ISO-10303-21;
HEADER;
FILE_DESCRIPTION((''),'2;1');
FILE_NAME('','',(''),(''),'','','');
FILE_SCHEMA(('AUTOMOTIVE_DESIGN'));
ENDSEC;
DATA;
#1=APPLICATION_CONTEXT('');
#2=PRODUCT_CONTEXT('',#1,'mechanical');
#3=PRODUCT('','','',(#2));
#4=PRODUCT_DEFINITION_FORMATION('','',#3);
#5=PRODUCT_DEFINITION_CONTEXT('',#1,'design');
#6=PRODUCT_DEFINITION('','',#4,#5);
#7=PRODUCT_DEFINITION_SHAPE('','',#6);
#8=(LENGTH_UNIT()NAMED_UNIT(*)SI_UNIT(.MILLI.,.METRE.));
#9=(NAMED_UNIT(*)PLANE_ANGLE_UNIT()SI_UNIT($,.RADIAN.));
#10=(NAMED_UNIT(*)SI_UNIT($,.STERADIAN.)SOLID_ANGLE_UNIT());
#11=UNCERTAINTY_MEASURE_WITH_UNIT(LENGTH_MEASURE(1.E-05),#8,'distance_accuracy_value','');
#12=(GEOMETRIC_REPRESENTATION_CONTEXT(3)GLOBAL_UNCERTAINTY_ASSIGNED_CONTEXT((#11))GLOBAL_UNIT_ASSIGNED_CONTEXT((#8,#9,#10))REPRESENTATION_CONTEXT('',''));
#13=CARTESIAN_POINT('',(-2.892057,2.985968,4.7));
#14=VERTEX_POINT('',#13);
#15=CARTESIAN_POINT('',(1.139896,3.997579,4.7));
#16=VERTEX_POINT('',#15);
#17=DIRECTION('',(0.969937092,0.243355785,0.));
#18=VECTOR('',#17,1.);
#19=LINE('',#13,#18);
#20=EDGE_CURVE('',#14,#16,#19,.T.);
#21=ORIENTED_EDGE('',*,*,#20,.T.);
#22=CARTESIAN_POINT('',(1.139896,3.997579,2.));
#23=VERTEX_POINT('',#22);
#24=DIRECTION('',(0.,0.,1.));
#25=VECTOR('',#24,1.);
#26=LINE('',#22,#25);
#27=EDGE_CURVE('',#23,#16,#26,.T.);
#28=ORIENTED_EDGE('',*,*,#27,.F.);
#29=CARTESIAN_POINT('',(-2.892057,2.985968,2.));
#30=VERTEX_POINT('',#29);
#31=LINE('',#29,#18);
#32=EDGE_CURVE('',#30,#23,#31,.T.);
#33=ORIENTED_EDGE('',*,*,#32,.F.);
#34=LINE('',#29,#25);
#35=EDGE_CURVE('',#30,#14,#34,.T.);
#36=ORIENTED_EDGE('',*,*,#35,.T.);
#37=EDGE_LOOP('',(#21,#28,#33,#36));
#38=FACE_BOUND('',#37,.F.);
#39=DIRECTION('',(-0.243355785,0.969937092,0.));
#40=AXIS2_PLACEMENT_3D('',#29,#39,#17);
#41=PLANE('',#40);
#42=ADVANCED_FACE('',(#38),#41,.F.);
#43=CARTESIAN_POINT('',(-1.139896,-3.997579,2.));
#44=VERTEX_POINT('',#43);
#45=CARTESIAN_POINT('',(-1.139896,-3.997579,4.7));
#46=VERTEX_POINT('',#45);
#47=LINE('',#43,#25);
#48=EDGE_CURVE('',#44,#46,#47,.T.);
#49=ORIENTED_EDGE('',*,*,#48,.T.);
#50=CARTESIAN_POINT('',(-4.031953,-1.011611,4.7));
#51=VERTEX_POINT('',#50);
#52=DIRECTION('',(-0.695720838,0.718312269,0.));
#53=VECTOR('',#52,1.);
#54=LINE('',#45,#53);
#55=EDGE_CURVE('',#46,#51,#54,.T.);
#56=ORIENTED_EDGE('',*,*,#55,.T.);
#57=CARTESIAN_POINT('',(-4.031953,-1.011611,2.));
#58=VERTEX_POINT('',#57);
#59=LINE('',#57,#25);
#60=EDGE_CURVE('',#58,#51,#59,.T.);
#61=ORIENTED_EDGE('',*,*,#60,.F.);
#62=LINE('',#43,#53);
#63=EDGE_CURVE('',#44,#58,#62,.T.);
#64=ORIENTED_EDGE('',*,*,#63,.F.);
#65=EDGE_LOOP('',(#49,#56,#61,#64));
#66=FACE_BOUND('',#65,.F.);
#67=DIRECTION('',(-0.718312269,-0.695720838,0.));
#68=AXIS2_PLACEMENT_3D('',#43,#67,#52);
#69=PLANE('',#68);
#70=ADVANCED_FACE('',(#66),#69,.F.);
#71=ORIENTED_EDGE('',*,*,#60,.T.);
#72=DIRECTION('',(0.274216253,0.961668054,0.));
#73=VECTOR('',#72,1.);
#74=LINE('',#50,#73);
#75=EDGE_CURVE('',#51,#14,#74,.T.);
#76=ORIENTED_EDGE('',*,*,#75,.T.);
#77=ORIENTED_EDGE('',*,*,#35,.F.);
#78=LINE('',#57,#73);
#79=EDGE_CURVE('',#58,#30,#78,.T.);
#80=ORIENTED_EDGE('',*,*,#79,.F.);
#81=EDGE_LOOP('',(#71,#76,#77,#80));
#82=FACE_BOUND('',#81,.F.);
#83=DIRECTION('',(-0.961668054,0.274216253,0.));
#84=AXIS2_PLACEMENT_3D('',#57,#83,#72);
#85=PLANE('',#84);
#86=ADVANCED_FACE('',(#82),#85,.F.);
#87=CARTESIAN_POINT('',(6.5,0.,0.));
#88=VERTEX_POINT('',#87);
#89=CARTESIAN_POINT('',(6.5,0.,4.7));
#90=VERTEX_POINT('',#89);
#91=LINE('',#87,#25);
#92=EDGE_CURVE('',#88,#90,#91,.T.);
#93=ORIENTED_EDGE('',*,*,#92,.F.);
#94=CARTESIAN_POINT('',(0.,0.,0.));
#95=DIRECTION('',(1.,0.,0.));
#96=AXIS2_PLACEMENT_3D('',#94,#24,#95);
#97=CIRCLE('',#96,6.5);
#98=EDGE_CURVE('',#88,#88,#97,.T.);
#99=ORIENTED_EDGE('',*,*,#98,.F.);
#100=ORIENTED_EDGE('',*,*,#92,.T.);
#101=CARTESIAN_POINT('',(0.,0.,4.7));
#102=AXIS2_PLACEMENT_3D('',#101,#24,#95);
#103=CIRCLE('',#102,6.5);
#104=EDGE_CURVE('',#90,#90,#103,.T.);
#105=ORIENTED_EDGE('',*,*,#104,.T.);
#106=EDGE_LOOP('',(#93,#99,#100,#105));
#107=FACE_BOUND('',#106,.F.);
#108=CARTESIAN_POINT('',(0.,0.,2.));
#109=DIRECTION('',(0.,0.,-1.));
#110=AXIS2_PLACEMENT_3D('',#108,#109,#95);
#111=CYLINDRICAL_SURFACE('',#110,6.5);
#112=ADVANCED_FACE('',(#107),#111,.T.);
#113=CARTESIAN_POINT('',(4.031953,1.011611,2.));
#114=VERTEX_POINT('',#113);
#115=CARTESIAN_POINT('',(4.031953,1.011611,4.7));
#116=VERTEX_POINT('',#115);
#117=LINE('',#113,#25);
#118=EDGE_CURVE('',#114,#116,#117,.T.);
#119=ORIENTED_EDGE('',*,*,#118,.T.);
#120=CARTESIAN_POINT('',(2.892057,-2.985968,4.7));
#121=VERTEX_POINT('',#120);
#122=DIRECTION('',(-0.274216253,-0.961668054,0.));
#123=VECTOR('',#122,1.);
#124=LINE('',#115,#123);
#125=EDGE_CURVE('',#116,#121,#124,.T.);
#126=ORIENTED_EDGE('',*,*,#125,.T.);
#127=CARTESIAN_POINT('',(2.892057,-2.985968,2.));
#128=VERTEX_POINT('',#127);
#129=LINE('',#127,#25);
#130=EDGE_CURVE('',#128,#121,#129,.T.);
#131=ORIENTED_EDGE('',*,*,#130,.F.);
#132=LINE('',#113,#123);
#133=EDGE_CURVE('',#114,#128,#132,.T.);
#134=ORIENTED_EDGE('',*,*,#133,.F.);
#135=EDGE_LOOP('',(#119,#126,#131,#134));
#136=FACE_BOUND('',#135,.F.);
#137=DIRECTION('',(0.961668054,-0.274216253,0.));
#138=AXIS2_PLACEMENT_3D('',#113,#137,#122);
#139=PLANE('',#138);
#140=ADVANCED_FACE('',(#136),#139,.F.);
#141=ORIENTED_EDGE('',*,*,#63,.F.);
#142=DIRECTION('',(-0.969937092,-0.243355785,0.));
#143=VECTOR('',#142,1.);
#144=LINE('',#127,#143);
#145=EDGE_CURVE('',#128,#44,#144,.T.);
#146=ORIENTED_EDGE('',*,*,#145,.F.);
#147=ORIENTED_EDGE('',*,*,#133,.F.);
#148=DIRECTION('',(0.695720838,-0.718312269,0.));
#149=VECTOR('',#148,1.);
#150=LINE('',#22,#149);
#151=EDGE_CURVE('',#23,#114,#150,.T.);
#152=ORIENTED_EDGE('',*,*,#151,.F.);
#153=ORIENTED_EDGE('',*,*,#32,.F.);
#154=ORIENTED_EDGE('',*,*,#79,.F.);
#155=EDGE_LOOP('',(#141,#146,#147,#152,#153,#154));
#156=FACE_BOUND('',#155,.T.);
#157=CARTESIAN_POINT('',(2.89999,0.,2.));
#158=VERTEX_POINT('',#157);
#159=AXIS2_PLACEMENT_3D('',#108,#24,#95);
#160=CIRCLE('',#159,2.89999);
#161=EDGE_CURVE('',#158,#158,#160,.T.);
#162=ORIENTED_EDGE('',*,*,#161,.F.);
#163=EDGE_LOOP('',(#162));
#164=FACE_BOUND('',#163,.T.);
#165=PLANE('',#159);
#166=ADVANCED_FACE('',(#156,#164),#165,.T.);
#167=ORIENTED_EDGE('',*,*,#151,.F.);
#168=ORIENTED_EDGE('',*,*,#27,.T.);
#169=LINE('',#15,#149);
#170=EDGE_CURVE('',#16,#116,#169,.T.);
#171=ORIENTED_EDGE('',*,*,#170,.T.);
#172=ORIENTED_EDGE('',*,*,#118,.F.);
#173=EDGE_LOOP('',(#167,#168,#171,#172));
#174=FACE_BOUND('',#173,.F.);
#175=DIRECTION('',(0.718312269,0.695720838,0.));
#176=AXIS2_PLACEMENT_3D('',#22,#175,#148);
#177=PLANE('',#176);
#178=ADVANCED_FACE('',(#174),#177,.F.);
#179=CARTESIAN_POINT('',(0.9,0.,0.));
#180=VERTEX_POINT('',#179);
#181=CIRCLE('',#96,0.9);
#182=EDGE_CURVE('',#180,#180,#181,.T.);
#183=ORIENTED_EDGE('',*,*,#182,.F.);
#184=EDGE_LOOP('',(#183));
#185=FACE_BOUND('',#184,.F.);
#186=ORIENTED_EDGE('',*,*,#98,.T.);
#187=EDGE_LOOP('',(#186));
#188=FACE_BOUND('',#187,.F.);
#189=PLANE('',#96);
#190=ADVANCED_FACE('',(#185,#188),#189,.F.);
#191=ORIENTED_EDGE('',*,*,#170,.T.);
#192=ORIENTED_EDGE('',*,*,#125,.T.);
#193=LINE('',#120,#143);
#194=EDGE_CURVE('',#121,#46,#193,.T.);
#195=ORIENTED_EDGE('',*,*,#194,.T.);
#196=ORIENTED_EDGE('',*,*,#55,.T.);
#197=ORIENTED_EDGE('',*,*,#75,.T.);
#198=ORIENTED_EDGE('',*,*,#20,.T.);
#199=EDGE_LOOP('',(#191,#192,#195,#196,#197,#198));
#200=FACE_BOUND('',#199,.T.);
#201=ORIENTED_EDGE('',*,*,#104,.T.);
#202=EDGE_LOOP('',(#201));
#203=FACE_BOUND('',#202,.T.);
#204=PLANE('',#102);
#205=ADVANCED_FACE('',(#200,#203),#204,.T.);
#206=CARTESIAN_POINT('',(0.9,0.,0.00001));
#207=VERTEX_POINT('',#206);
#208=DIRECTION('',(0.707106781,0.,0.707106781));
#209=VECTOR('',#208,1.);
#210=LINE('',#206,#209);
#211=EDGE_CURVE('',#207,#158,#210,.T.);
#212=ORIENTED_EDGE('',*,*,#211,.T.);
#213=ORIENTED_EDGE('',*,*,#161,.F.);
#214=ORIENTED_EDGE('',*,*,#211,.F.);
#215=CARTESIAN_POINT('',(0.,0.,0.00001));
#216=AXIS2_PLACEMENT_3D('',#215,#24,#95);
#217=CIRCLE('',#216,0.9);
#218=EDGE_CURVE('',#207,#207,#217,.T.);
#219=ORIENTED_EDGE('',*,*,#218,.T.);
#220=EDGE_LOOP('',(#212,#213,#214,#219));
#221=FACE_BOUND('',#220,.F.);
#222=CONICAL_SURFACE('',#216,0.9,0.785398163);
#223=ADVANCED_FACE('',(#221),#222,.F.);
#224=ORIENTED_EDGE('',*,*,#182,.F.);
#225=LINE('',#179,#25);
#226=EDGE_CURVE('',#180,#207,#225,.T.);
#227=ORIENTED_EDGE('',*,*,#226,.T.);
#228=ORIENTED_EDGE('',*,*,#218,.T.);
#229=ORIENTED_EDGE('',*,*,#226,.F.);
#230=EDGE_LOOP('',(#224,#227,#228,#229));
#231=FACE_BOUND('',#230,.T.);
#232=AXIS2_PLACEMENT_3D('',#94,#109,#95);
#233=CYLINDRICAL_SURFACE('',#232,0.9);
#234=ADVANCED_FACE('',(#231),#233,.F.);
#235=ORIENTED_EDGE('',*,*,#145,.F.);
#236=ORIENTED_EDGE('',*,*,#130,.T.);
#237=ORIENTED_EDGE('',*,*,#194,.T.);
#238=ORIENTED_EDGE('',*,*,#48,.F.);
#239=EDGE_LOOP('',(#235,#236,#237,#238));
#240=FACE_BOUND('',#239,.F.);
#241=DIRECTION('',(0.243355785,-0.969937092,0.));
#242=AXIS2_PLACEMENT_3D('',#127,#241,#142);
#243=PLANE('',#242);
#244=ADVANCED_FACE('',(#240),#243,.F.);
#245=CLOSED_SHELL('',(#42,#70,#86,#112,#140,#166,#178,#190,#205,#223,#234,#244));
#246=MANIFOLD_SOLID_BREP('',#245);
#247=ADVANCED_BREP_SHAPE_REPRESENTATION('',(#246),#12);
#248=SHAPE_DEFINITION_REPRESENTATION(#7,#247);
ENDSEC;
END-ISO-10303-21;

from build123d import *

# Parameters (mm, degrees)
F0_R     = 6.5
F0_R_2   = 0.9
F1_DEPTH = 2
F2_SIZE  = 1.99999
F3_R     = 6.5
F4_DEPTH = 2.7


# Not quite as in the source:
# - a fillet or chamfer is up to 0.001 mm smaller than in the source, because OpenCascade refuses the exact size


with BuildPart() as f1:
    # F0 (on Top) → F1 (new body)
    with BuildSketch(Plane.XY):
        Circle(F0_R)
        Circle(F0_R_2, mode=Mode.SUBTRACT)
    extrude(amount=F1_DEPTH)

    # F2 (size 2 in the source; OpenCascade refuses exactly that, so slightly less here)
    f2_edges = [f1.edges().sort_by_distance(p)[0] for p in [
        (-0.9, 0, 2),
    ]]
    chamfer(f2_edges, length=F2_SIZE)

    # F3 (on face) → F4 (join)
    with BuildSketch(Plane.XY.offset(2)):
        Circle(F3_R)
        Polygon((-2.8920572149, 2.9859680282), (1.1398955598, 3.9975790314), (4.0319527748, 1.0116110032), (2.8920572149, -2.9859680282), (-1.1398955598, -3.9975790314), (-4.0319527748, -1.0116110032), align=None, mode=Mode.SUBTRACT)
    extrude(amount=F4_DEPTH)


solid = f1.part
